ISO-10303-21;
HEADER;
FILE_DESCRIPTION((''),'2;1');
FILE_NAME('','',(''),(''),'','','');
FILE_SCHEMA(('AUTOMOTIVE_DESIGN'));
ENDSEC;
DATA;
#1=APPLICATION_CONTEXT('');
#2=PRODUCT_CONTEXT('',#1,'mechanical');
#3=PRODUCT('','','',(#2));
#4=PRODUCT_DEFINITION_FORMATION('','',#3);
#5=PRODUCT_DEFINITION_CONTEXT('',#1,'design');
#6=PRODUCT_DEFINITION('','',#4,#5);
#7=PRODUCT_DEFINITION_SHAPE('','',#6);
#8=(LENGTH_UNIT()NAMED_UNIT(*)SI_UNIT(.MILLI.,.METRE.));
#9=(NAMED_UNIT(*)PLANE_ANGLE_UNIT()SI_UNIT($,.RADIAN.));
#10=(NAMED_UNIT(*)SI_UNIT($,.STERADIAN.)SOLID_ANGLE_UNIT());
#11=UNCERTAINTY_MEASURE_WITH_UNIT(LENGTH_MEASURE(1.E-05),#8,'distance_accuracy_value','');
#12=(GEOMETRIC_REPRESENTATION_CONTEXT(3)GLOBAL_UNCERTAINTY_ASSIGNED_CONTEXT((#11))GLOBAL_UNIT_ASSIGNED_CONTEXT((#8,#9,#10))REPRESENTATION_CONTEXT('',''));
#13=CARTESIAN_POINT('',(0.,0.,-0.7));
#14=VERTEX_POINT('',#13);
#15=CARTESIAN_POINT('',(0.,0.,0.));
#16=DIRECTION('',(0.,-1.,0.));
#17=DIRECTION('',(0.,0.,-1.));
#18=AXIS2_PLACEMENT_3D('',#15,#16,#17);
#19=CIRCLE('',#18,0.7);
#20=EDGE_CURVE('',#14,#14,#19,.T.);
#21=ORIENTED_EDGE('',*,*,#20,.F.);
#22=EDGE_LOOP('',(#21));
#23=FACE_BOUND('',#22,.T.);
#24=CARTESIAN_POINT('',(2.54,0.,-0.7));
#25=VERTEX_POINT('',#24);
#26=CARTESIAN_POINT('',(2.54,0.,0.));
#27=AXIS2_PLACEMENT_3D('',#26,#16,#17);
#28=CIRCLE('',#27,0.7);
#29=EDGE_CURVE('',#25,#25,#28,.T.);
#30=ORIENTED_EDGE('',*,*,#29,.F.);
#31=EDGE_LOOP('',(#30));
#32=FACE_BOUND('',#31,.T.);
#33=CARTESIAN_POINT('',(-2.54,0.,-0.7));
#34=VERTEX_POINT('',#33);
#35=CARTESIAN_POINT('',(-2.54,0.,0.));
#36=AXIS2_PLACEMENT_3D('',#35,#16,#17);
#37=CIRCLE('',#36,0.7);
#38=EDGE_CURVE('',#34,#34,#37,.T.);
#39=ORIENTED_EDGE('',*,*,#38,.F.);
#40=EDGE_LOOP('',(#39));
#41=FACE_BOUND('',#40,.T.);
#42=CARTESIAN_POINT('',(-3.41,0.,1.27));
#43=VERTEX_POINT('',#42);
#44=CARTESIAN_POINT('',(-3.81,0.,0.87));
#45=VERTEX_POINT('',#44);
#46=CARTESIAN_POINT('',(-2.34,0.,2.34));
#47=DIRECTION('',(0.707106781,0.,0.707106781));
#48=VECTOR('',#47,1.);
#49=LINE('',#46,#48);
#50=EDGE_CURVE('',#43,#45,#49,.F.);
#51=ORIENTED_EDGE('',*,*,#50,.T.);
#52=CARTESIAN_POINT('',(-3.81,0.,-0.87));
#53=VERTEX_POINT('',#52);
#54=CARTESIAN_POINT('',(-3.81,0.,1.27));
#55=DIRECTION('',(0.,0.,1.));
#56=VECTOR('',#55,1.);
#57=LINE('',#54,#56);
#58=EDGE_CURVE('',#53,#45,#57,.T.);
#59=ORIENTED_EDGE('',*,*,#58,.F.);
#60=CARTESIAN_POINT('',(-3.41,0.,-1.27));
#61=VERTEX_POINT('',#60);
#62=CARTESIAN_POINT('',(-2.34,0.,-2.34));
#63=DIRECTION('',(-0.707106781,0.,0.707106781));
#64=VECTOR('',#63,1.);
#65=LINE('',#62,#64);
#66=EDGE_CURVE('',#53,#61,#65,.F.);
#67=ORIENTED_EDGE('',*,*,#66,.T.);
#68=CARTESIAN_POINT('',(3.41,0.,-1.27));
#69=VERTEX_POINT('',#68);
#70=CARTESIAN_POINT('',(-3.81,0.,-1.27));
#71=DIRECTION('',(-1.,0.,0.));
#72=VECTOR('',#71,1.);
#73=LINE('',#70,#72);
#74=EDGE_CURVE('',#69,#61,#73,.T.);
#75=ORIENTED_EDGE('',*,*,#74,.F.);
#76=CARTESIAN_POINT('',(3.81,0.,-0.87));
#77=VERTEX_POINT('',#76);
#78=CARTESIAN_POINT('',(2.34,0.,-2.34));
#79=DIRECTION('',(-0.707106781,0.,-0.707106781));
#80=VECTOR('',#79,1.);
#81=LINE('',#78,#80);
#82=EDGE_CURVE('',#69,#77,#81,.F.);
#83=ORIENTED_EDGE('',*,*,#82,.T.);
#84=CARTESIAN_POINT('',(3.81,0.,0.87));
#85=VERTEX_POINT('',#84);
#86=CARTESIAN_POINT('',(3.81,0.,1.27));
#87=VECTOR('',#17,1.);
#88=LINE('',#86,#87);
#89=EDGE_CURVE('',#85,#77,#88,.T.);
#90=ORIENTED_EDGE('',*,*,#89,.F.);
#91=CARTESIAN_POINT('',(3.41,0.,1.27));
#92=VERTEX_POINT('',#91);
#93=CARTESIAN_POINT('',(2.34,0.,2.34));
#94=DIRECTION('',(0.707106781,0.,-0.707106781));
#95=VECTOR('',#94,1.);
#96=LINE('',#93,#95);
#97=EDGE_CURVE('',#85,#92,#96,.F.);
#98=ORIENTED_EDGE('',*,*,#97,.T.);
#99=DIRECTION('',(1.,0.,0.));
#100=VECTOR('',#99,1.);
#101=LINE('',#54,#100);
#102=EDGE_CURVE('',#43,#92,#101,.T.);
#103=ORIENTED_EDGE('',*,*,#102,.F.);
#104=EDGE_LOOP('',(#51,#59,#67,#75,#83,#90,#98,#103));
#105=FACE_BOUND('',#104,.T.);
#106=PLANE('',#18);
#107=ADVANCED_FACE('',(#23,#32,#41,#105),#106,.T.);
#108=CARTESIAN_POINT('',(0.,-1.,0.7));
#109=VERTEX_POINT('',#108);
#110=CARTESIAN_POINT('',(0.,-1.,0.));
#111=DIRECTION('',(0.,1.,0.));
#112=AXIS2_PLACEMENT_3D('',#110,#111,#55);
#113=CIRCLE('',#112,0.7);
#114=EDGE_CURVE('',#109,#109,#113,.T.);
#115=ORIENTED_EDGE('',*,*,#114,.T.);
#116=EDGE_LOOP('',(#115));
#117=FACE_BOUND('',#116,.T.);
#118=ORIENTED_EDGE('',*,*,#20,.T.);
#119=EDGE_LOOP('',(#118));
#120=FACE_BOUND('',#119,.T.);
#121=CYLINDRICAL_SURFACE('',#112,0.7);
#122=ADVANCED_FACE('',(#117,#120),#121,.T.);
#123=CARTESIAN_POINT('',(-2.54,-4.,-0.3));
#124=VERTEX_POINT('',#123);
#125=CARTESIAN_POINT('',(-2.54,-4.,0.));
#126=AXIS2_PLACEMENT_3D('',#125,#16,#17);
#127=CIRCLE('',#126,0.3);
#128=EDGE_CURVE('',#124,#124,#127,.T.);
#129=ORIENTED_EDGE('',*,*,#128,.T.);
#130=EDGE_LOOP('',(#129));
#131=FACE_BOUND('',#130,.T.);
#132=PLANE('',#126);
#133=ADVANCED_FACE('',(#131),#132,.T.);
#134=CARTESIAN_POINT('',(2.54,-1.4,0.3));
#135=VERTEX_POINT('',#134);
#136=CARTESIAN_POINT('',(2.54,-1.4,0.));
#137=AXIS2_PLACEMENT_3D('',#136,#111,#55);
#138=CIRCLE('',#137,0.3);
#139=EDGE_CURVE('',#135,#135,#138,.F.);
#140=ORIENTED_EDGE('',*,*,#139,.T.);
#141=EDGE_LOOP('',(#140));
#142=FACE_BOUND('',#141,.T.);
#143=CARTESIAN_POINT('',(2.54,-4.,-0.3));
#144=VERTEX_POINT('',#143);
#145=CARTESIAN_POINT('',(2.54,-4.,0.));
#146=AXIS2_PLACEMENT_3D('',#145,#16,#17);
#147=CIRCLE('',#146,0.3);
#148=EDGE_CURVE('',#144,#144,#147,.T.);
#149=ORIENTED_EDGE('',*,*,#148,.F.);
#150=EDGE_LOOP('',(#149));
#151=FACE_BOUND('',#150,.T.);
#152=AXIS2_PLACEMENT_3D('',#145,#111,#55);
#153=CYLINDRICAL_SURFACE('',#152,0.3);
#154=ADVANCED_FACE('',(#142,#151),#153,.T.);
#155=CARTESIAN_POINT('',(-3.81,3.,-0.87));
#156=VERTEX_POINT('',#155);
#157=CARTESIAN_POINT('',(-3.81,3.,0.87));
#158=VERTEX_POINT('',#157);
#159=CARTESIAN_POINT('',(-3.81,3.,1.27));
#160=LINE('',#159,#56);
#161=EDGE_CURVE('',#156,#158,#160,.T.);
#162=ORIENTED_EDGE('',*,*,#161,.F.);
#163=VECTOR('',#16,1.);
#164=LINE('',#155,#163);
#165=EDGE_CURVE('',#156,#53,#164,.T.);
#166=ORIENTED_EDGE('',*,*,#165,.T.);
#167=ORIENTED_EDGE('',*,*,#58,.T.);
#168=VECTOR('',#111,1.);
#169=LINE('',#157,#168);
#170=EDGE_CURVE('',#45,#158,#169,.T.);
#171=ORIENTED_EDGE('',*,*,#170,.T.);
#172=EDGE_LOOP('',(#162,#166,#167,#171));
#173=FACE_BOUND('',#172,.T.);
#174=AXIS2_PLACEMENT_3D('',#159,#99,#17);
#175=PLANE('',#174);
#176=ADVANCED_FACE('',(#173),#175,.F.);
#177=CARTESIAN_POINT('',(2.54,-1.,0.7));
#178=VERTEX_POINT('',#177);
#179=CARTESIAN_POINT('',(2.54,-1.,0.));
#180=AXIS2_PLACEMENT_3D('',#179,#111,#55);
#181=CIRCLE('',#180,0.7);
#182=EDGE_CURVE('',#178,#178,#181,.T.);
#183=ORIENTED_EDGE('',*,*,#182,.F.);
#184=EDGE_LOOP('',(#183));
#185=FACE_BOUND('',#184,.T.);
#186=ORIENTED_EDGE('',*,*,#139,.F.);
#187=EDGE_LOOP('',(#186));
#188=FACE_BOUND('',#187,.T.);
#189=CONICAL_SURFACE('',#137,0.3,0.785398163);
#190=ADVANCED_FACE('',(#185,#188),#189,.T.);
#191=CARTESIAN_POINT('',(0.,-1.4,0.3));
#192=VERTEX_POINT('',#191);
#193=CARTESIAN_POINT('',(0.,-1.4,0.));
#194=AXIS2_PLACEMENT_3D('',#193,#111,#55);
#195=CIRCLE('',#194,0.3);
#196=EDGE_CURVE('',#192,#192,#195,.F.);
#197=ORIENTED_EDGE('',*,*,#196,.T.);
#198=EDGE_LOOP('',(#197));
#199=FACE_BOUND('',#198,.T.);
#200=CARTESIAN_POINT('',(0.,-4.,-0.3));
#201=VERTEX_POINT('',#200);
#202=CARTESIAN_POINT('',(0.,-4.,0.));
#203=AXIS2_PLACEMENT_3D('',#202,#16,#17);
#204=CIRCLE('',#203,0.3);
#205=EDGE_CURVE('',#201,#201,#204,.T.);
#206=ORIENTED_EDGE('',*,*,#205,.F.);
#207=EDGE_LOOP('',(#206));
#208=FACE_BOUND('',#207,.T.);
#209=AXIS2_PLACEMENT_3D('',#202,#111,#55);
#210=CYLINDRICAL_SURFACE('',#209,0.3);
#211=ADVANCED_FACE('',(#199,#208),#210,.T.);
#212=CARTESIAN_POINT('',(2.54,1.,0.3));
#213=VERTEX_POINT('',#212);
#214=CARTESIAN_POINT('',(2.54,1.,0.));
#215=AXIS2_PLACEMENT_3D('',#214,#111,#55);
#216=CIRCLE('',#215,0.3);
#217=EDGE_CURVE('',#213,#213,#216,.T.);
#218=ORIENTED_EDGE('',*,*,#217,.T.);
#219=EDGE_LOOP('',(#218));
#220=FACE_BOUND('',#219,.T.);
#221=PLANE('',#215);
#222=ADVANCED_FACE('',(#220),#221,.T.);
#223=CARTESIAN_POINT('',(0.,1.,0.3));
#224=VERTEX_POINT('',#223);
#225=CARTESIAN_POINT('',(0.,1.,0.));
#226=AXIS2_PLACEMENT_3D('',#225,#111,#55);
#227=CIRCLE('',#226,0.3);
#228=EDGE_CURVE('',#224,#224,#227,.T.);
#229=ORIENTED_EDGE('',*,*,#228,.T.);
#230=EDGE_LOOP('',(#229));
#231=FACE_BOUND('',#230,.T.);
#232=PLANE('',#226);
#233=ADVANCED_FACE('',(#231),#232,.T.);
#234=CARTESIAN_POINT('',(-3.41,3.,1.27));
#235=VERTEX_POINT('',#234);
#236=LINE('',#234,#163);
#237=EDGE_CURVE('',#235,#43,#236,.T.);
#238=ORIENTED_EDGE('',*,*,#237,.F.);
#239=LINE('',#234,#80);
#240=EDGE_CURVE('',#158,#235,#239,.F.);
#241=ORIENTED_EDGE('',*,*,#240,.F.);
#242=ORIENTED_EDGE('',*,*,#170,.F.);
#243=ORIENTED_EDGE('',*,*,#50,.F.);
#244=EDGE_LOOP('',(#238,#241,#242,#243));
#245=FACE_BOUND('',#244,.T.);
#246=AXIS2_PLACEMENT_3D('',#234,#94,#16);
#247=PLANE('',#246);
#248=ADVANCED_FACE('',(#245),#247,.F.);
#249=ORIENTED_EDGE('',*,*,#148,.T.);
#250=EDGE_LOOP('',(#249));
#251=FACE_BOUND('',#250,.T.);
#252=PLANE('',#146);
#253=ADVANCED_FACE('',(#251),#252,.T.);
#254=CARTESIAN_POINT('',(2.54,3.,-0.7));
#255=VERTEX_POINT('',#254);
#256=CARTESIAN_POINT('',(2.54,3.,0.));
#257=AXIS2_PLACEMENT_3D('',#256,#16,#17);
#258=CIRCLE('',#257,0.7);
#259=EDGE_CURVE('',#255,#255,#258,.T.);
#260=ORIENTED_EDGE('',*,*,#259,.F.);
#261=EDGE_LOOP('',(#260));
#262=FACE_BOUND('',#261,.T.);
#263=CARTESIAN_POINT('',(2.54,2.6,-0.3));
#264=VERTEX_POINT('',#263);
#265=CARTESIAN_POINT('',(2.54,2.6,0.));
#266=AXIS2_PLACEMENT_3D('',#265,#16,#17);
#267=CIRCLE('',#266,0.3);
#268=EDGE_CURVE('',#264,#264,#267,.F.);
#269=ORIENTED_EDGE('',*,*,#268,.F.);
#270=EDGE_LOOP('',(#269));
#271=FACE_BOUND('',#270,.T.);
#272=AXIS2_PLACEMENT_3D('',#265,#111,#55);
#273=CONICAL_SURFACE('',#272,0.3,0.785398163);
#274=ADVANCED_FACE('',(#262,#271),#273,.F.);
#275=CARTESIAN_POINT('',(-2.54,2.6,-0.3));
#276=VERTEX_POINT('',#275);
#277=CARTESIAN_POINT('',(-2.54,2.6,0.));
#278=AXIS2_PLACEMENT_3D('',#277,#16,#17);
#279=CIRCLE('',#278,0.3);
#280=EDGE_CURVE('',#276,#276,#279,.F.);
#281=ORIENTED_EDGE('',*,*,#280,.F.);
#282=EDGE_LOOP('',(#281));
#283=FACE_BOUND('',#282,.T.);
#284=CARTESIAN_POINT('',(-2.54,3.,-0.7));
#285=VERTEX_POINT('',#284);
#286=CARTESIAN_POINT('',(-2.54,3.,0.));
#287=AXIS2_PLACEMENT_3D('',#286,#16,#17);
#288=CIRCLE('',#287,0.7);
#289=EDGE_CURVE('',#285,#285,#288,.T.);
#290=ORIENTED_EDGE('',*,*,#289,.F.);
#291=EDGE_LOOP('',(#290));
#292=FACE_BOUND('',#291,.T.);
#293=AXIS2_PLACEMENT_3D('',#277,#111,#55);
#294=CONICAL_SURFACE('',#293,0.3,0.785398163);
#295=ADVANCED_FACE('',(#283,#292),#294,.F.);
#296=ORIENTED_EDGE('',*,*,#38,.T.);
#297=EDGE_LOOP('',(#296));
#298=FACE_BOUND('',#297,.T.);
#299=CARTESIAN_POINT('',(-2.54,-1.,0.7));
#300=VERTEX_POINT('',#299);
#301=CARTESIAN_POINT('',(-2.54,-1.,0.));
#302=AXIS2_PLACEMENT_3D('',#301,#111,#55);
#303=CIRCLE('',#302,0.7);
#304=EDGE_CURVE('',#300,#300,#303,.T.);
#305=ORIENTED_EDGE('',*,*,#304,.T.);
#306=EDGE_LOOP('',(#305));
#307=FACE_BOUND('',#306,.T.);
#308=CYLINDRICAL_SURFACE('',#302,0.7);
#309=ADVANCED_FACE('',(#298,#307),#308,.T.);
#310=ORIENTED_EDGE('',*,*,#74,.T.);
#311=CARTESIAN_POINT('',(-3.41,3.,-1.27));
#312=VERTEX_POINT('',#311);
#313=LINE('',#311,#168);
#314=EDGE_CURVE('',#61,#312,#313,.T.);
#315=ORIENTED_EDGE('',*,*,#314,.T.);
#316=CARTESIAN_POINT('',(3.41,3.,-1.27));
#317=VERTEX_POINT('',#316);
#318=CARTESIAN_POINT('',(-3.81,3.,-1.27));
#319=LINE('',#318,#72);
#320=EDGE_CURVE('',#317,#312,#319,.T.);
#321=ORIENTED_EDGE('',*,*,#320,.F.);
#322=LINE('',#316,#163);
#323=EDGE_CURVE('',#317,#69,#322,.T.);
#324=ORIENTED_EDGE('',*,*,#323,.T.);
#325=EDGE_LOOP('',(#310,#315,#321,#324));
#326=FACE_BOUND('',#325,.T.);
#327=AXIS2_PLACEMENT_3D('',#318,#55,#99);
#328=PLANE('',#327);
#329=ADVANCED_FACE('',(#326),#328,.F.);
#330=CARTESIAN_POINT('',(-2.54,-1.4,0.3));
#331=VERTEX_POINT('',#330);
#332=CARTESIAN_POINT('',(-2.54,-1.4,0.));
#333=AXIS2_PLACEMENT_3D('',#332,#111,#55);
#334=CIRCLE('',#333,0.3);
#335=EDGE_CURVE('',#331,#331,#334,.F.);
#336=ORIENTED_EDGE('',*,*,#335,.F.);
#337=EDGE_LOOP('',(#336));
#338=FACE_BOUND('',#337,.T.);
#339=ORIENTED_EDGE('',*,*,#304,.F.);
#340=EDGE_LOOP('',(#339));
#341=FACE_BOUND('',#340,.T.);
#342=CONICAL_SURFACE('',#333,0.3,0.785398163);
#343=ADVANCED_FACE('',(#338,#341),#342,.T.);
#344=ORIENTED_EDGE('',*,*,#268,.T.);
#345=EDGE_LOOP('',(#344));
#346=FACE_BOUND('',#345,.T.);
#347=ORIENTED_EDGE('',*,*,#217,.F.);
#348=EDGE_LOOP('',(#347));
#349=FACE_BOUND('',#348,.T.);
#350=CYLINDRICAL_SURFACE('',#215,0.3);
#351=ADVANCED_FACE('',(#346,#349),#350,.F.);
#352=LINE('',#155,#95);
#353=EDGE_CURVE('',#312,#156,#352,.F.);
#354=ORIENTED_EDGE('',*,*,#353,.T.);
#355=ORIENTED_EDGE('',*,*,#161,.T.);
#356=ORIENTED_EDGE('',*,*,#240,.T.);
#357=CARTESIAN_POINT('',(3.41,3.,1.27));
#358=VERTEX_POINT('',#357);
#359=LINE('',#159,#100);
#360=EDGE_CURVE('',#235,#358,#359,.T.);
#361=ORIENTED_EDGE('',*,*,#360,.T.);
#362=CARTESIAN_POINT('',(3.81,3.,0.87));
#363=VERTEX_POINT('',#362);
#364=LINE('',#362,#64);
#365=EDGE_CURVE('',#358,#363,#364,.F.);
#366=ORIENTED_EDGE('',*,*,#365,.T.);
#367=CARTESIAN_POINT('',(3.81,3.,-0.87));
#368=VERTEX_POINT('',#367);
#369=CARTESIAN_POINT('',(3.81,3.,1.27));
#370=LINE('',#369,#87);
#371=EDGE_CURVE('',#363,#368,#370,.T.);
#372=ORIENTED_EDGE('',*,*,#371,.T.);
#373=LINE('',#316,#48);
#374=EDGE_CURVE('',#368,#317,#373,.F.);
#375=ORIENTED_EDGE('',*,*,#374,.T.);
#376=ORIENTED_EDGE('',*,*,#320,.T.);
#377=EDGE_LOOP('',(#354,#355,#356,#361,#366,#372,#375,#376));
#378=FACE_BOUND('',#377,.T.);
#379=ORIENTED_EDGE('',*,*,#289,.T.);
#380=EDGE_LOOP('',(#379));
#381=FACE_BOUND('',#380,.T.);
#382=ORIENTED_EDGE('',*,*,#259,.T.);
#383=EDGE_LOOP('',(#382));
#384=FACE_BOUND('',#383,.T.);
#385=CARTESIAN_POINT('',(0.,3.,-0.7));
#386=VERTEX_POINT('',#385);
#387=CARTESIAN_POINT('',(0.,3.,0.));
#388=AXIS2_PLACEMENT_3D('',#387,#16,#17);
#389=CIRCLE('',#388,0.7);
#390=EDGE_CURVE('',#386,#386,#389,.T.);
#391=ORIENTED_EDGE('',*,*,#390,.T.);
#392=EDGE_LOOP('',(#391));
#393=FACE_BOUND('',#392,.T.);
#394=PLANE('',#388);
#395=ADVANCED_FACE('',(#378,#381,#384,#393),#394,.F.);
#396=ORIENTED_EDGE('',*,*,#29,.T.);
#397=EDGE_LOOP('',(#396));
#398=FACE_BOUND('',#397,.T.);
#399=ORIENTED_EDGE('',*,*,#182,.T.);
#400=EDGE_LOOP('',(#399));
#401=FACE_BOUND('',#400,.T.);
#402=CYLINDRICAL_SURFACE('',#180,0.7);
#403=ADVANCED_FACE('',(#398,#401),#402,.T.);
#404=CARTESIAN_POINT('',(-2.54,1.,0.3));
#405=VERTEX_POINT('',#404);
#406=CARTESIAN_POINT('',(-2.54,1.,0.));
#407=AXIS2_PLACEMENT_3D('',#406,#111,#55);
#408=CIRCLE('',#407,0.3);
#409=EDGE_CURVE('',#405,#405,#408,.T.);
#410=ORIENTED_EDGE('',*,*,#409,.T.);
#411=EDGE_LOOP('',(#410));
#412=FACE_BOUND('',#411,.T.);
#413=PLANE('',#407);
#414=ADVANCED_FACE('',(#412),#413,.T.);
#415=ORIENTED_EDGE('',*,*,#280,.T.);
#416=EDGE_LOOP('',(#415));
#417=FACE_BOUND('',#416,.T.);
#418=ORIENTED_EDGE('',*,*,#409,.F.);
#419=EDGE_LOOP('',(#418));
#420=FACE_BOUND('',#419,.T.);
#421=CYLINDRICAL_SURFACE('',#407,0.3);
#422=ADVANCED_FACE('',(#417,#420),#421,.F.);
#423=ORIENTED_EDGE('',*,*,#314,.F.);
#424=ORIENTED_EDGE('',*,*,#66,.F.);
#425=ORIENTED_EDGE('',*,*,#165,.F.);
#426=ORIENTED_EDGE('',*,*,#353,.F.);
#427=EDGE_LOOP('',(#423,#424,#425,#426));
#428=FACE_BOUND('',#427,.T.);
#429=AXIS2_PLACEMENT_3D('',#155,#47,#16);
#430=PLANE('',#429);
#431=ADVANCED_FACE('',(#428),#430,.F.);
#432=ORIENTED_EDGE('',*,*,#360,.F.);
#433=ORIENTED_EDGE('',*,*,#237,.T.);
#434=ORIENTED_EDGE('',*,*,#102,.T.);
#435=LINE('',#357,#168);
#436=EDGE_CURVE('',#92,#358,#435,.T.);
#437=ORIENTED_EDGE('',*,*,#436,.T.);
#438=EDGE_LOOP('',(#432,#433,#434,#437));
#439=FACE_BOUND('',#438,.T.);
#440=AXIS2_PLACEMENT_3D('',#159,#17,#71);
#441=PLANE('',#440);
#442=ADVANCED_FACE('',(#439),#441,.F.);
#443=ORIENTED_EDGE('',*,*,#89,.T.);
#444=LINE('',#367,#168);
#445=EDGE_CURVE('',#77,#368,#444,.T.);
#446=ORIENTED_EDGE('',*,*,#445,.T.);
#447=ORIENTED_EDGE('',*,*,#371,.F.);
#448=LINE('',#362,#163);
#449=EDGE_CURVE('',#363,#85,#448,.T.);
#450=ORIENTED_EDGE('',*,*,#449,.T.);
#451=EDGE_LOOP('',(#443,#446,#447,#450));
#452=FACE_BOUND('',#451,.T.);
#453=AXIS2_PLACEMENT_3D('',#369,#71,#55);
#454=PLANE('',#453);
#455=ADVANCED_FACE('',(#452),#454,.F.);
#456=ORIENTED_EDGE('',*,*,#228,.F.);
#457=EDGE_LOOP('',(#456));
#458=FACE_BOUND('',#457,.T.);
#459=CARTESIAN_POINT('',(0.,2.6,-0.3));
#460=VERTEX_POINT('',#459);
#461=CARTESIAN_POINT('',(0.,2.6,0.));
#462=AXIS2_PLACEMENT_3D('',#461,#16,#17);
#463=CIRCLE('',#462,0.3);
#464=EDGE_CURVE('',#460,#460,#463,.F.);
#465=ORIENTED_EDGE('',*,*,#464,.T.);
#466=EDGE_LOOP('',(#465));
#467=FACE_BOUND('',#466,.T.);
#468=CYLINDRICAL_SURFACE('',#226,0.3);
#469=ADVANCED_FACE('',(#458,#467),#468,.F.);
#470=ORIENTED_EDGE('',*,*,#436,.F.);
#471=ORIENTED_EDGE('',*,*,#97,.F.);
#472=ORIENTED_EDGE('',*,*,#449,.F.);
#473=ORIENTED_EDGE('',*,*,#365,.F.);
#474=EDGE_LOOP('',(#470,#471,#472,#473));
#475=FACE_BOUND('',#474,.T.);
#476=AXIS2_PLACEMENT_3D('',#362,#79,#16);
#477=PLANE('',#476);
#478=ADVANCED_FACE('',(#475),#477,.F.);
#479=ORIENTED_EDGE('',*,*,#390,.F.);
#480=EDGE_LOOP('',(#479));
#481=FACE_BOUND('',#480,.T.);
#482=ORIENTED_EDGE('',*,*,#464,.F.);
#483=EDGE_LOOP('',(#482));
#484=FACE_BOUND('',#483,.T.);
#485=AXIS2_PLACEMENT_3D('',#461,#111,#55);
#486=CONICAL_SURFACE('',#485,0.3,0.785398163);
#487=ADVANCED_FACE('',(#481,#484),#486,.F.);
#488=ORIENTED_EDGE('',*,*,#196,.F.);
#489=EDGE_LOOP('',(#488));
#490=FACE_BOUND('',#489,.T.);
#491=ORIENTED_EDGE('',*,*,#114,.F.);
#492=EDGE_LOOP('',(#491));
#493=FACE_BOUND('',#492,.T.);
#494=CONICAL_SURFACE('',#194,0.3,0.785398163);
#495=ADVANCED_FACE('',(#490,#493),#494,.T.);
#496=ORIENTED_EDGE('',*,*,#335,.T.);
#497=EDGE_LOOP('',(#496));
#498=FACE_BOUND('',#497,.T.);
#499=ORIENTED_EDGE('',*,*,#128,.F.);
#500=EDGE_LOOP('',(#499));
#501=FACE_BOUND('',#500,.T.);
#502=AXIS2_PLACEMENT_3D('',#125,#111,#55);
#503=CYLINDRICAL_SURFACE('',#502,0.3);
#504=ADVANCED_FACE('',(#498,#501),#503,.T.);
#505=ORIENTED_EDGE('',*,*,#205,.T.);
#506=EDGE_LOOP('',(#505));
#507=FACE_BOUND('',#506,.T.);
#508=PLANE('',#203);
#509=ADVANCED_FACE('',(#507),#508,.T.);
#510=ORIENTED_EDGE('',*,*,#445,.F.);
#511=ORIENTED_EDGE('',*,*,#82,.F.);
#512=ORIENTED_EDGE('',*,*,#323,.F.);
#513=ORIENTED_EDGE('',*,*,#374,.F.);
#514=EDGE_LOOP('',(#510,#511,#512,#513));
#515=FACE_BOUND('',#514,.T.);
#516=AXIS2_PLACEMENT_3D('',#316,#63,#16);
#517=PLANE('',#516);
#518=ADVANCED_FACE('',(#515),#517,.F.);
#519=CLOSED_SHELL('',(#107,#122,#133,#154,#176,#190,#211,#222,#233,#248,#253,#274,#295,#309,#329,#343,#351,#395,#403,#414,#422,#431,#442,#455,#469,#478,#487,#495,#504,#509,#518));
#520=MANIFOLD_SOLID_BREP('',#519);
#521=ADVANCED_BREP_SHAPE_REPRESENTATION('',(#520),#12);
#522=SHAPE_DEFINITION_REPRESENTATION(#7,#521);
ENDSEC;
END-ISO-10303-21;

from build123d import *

# Parameters (mm, degrees)
ESQUISSE1_W             = 7.62
ESQUISSE1_H             = 2.54
BOSS_EXTRU_1_DEPTH      = 3
ESQUISSE2_R             = 0.3
ENL_V_MAT_EXTRU_1_DEPTH = 2
ESQUISSE3_R             = 0.7
BOSS_EXTRU_2_DEPTH      = 1
ESQUISSE4_R             = 0.3
BOSS_EXTRU_3_DEPTH      = 3
CHANFREIN1_SIZE         = 0.4


with BuildPart() as part:
    # Esquisse1 → Boss.-Extru.1 (new body)
    with BuildSketch(Plane(origin=(0, 0, 0), x_dir=(1, 0, 0), z_dir=(0, 1, 0))):
        Rectangle(ESQUISSE1_W, ESQUISSE1_H)
    extrude(amount=BOSS_EXTRU_1_DEPTH)

    # Esquisse2 → Enlèv. mat.-Extru.1 (cut)
    with BuildSketch(Plane(origin=(0, 3, 0), x_dir=(1, 0, 0), z_dir=(0, 1, 0))):
        with Locations(Location((-2.54, 0, 0), (0, 0, 270))):
            Circle(ESQUISSE2_R)
        with Locations(Location((0, 0, 0), (0, 0, 270))):
            Circle(ESQUISSE2_R)
        with Locations(Location((2.54, 0, 0), (0, 0, 270))):
            Circle(ESQUISSE2_R)
    extrude(amount=-ENL_V_MAT_EXTRU_1_DEPTH, mode=Mode.SUBTRACT)

    # Esquisse3 → Boss.-Extru.2 (add)
    with BuildSketch(Plane(origin=(0, 0, 0), x_dir=(1, 0, 0), z_dir=(0, 1, 0))):
        with Locations(Location((-2.54, 0, 0), (0, 0, 270))):
            Circle(ESQUISSE3_R)
        with Locations(Location((0, 0, 0), (0, 0, 270))):
            Circle(ESQUISSE3_R)
        with Locations(Location((2.54, 0, 0), (0, 0, 270))):
            Circle(ESQUISSE3_R)
    extrude(amount=-BOSS_EXTRU_2_DEPTH)

    # Esquisse4 → Boss.-Extru.3 (add)
    with BuildSketch(Plane.XZ.offset(1)):
        with Locations(Location((-2.54, 0, 0), (0, 0, 90))):
            Circle(ESQUISSE4_R)
        with Locations(Location((0, 0, 0), (0, 0, 90))):
            Circle(ESQUISSE4_R)
        with Locations(Location((2.54, 0, 0), (0, 0, 90))):
            Circle(ESQUISSE4_R)
    extrude(amount=BOSS_EXTRU_3_DEPTH)

    # Chanfrein1
    chanfrein1_edges = [part.edges().sort_by_distance(p)[0] for p in [
        (-2.54, 3, -0.3),
        (2.54, 3, -0.3),
        (0, 3, -0.3),
        (-2.54, -1, -0.3),
        (0, -1, -0.3),
        (2.54, -1, -0.3),
        (-3.81, 1.5, -1.27),
        (3.81, 1.5, -1.27),
        (3.81, 1.5, 1.27),
        (-3.81, 1.5, 1.27),
    ]]
    chamfer(chanfrein1_edges, length=CHANFREIN1_SIZE - 0.0001)  # a hair under: the kernel refuses the full size


solid = part.part
